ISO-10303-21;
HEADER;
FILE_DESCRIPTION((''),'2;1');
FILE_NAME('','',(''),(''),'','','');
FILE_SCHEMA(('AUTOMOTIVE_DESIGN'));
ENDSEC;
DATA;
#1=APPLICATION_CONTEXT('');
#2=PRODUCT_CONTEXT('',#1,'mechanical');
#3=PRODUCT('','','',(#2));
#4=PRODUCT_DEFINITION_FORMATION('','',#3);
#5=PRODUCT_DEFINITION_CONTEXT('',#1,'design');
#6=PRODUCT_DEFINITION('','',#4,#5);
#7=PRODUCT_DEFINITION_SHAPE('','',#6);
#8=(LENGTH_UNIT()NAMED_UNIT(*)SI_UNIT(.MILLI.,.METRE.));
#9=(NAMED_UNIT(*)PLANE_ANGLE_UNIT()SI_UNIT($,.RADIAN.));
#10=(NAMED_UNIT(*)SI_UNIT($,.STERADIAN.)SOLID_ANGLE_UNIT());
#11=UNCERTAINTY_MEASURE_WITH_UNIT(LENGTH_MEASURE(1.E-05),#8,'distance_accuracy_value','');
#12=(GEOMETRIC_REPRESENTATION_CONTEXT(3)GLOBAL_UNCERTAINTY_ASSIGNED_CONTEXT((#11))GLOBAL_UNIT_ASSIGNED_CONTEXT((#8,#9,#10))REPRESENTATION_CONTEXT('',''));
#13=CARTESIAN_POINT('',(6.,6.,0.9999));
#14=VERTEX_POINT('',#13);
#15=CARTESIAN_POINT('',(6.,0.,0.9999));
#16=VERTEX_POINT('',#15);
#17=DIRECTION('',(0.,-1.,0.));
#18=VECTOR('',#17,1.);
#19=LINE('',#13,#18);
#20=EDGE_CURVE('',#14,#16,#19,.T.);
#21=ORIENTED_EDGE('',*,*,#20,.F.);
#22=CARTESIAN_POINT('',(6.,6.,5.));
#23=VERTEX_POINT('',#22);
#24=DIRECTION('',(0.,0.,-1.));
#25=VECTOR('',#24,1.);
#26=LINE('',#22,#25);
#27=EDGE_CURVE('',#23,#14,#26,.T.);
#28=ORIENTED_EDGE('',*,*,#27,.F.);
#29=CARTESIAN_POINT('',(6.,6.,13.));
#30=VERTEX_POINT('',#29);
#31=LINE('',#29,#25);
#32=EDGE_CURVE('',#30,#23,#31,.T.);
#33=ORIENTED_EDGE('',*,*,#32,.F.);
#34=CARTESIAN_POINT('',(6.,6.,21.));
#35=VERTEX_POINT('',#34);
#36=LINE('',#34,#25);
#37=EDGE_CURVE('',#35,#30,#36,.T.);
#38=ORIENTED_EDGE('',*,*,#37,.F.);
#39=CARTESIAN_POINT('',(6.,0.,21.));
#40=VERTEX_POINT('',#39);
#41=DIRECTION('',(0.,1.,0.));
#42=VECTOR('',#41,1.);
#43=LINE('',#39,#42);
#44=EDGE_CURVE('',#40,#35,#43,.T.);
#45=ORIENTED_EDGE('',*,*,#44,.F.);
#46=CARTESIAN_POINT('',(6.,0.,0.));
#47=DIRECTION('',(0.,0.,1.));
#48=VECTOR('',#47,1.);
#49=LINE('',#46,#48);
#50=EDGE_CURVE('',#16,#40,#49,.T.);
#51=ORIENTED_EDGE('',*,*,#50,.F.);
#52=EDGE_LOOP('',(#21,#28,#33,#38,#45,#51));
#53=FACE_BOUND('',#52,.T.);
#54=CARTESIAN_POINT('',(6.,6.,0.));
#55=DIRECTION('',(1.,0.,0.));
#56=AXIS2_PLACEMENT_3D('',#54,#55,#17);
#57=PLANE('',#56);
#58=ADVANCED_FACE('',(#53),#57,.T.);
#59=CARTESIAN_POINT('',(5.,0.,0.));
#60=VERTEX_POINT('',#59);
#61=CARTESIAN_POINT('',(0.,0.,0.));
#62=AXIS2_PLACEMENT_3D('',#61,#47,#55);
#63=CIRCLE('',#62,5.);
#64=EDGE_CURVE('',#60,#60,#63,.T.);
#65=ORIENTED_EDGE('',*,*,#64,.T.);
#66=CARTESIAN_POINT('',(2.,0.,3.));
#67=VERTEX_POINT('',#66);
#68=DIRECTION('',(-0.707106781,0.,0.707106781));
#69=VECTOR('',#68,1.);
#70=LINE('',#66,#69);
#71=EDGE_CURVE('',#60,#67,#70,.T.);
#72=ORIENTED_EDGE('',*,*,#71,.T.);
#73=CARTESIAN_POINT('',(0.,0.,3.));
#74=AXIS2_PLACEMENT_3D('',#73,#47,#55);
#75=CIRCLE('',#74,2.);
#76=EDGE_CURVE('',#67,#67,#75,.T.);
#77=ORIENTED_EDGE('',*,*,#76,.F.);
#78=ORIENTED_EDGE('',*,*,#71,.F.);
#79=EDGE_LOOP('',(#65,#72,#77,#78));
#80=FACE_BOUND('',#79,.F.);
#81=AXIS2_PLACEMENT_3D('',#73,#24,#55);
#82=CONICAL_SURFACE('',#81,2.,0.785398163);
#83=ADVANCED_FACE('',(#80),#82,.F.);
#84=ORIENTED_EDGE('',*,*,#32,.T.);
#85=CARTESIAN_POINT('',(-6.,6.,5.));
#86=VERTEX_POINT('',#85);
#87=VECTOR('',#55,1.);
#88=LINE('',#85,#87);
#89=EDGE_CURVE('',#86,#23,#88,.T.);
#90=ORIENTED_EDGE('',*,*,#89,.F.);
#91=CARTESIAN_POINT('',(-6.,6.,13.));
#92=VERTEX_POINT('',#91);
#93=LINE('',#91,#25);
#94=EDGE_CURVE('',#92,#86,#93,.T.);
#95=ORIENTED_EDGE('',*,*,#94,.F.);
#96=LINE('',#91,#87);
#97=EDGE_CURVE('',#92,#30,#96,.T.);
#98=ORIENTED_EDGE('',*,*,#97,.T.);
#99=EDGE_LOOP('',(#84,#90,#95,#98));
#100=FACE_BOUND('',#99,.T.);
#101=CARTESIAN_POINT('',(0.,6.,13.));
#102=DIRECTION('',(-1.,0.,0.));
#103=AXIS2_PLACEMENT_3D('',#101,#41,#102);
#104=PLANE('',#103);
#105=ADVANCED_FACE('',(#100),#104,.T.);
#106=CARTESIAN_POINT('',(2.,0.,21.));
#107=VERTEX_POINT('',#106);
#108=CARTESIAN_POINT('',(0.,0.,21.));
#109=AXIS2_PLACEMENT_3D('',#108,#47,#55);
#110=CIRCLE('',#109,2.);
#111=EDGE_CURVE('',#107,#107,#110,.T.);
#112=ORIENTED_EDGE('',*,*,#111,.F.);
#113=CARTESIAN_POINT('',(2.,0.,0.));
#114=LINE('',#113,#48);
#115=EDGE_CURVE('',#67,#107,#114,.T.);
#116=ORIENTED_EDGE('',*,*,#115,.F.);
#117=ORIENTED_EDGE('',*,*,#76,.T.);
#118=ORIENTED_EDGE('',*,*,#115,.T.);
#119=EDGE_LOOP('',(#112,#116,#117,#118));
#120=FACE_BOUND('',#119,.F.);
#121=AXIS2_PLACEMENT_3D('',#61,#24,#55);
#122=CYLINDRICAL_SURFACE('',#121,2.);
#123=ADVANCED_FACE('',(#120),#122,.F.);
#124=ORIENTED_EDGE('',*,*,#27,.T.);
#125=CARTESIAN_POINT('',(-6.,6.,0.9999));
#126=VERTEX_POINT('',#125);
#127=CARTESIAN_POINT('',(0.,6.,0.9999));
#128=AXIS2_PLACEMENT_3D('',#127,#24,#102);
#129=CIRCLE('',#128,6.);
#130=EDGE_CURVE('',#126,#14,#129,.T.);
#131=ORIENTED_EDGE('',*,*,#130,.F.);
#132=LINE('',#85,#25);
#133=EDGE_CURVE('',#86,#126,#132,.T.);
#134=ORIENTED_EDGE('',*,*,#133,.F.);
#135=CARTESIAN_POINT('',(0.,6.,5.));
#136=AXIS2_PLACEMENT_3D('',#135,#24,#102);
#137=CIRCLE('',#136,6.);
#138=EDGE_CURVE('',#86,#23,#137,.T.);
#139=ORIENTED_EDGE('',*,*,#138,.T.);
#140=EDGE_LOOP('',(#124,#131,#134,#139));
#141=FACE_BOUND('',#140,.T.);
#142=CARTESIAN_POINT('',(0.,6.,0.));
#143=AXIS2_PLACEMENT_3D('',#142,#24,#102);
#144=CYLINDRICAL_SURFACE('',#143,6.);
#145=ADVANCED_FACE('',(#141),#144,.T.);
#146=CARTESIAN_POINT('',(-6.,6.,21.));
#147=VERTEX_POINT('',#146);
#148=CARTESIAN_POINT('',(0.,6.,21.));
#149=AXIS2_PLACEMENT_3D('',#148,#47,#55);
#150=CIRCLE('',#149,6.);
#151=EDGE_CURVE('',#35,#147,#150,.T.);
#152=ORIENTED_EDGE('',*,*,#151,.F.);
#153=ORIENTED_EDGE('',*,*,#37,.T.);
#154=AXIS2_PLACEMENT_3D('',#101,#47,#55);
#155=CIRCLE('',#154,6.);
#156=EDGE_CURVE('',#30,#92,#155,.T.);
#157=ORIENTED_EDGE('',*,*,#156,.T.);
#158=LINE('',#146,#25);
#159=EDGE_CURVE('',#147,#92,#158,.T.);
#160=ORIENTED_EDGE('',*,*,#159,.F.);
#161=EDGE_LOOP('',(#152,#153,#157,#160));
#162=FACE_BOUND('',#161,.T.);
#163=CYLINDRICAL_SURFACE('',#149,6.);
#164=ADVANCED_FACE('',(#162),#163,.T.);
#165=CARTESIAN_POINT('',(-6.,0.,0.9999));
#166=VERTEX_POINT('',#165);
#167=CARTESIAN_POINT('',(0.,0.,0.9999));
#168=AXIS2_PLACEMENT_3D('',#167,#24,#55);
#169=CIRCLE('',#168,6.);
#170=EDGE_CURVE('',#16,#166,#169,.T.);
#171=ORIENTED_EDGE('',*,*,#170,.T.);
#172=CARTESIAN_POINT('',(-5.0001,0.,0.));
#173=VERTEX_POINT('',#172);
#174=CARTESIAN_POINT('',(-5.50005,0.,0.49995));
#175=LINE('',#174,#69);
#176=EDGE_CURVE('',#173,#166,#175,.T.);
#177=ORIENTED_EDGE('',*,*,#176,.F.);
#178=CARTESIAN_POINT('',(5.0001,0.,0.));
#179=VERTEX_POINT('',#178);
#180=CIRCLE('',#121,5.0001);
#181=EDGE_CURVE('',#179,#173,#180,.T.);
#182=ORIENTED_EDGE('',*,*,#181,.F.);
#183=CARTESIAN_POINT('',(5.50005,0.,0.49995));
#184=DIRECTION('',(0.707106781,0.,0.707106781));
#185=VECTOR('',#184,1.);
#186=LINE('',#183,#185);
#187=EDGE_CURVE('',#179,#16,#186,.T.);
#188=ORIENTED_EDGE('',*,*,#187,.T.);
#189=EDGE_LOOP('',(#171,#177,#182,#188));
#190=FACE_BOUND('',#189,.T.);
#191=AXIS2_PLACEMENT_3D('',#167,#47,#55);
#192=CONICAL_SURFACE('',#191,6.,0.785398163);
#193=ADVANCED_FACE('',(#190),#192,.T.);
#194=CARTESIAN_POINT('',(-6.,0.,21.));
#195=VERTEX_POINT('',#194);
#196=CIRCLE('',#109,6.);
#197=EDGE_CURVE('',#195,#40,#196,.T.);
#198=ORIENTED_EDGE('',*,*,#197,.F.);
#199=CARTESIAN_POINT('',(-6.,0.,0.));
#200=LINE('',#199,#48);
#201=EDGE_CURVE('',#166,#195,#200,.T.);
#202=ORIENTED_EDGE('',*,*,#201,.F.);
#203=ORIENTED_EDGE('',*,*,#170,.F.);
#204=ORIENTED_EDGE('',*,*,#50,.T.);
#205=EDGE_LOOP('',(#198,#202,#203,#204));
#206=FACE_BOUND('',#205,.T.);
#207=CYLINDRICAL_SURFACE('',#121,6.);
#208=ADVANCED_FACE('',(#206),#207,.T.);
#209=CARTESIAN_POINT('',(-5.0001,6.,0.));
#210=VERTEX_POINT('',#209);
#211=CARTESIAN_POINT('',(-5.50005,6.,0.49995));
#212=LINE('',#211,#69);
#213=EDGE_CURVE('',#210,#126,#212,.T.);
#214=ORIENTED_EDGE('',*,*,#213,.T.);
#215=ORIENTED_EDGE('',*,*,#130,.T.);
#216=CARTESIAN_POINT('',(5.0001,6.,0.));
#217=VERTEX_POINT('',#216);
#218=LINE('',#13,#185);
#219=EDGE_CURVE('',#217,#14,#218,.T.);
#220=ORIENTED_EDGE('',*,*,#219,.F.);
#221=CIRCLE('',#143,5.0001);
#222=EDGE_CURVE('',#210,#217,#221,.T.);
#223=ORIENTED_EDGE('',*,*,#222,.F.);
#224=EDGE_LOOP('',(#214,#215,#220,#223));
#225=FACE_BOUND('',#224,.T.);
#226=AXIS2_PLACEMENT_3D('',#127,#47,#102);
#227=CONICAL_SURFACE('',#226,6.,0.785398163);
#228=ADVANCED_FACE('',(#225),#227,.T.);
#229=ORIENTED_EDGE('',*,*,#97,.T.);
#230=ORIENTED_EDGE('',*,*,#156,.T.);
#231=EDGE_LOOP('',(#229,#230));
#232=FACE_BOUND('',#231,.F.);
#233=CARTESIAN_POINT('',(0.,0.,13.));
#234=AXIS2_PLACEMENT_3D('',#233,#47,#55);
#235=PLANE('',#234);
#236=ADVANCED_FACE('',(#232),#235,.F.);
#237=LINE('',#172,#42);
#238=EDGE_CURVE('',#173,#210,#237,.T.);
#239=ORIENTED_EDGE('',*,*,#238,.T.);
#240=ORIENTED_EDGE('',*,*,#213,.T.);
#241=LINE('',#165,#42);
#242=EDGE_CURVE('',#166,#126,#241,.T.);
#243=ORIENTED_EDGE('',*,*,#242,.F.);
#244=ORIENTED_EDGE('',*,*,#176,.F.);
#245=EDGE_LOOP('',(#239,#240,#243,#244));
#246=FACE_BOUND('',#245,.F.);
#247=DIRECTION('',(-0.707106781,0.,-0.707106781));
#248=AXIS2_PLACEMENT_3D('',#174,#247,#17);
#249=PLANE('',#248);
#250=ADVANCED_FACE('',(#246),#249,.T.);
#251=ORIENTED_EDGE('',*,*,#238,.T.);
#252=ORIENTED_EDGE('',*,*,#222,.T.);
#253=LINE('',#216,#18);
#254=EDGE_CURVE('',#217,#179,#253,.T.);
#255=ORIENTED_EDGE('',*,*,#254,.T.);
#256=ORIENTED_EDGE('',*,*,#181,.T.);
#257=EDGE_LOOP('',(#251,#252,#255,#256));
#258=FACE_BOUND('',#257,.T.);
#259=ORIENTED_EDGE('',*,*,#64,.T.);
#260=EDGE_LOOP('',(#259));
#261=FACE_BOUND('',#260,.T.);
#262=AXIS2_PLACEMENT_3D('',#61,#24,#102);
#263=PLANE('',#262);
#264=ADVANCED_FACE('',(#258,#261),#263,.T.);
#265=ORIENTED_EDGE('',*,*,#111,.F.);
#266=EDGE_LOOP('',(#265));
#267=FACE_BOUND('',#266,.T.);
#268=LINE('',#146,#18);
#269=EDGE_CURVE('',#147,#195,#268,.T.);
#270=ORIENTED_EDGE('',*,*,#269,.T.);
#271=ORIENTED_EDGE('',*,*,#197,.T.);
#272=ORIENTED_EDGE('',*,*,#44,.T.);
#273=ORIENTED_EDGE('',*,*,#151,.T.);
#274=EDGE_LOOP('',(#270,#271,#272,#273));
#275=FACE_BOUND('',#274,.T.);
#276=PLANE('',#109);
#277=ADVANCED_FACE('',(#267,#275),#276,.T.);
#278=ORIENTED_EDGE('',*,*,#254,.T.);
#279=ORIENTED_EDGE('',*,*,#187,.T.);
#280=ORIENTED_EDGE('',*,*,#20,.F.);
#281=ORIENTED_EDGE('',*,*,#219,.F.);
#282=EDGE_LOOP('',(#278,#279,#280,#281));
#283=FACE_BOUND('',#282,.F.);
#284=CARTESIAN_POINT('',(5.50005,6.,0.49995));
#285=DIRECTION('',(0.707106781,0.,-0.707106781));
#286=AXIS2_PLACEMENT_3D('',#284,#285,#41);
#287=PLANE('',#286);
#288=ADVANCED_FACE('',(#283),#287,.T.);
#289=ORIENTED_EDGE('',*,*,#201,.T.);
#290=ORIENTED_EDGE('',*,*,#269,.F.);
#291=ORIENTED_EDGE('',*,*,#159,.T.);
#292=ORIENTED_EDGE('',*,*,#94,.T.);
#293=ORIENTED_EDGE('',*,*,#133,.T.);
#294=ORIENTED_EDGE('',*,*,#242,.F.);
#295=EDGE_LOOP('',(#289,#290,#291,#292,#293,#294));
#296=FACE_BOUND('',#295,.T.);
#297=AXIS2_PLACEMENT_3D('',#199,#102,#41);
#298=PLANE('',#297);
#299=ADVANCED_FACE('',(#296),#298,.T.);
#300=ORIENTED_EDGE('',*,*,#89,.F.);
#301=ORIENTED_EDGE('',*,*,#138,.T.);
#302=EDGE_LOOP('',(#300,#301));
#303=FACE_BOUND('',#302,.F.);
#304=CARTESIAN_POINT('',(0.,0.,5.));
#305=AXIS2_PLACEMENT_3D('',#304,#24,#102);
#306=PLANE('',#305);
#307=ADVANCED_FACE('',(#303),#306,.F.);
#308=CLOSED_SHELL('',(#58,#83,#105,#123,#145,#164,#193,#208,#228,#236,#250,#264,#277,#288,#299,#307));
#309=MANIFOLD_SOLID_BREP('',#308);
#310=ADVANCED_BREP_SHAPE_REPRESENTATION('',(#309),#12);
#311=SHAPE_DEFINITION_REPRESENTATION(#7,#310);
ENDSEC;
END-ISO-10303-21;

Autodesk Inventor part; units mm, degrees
ref_plane "YZ Plane" through (0, 0, 0) normal (1, 0, 0) x (0, 1, 0)
ref_plane "XZ Plane" through (0, 0, 0) normal (0, 1, 0) x (-1, 0, 0)
ref_plane "XY Plane" through (0, 0, 0) normal (0, 0, 1) x (1, 0, 0)
sketch "Sketch2" plane through (0, 0, 0) normal (0, 0, 1) x (1, 0, 0)
  circle A0 centre (0, 0) radius 6
  circle A1 centre (0, 0) radius 2
  dimension "d0" = 12
  dimension "d1" = 4
extrude "Extrusion1" add sketch "Sketch2" along normal blind 21
sketch "Sketch3" plane through (0, 0, 21) normal (0, 0, 1) x (1, 0, 0)
  line L0 (0, 0) -> (0, 6) construction
  line L1 (6, 0) -> (6, 6)
  line L2 (-6, 6) -> (-6, 0)
  arc A0 (-6, 0) -> (6, 0) centre (0, 0) ccw
  arc A1 (6, 6) -> (-6, 6) centre (0, 6) ccw
  circle A2 centre (0, 0) radius 2 projected
  circle A3 centre (0, 0) radius 6 projected
  circle A4 centre (0, 0) radius 2 projected
  circle A5 centre (0, 0) radius 6 projected
  point P0 (0, 3)
  dimension "d4" = 6
  dimension "d5" = 6
extrude "Extrusion2" add sketch "Sketch3" against normal blind 8 contours A3 L2 A1 L1
sketch "Sketch4" plane through (0, 0, 0) normal (0, 0, -1) x (-1, 0, 0)
  arc A0 (6, 6) -> (-6, 6) centre (0, 6) ccw projected
  line L0 (-6, 6) -> (-6, 0) projected
  line L1 (6, 0) -> (6, 6) projected
  arc A1 (6, 0) -> (-6, 0) centre (0, 0) ccw projected
  circle A2 centre (0, 0) radius 2 projected
extrude "Extrusion3" add sketch "Sketch4" against normal blind 5 contours L1 A1 L0 A0
sketch "Sketch5" plane through (0, 0, 13) normal (0, 0, -1) x (-1, 0, 0)
  arc A0 (6, 6) -> (-6, 6) centre (0, 6) ccw projected
  line L0 (-6, 6) -> (-6, 0) projected
  line L1 (6, 0) -> (6, 6) projected
  arc A1 (6, 0) -> (-6, 0) centre (0, 0) ccw projected
  line L2 (-6, 6) -> (6, 6)
  arc A2 (6, 0) -> (-6, 0) centre (0, 0) ccw projected
  point P0 (0, 6)
extrude "Extrusion4" add sketch "Sketch5" along normal blind 8.2 contours L1 A1 L2 | L2 A1 L0
chamfer "Chamfer1" distance 3 angle 45 1 edges at (-2, 0, 0)
chamfer "Chamfer2" distance 1 angle 45 4 edges at (-6, 3, 0) (0, 12, 0) (6, 3, 0) (0, -6, 0)
properties part number "picture-fixings-8mm"
